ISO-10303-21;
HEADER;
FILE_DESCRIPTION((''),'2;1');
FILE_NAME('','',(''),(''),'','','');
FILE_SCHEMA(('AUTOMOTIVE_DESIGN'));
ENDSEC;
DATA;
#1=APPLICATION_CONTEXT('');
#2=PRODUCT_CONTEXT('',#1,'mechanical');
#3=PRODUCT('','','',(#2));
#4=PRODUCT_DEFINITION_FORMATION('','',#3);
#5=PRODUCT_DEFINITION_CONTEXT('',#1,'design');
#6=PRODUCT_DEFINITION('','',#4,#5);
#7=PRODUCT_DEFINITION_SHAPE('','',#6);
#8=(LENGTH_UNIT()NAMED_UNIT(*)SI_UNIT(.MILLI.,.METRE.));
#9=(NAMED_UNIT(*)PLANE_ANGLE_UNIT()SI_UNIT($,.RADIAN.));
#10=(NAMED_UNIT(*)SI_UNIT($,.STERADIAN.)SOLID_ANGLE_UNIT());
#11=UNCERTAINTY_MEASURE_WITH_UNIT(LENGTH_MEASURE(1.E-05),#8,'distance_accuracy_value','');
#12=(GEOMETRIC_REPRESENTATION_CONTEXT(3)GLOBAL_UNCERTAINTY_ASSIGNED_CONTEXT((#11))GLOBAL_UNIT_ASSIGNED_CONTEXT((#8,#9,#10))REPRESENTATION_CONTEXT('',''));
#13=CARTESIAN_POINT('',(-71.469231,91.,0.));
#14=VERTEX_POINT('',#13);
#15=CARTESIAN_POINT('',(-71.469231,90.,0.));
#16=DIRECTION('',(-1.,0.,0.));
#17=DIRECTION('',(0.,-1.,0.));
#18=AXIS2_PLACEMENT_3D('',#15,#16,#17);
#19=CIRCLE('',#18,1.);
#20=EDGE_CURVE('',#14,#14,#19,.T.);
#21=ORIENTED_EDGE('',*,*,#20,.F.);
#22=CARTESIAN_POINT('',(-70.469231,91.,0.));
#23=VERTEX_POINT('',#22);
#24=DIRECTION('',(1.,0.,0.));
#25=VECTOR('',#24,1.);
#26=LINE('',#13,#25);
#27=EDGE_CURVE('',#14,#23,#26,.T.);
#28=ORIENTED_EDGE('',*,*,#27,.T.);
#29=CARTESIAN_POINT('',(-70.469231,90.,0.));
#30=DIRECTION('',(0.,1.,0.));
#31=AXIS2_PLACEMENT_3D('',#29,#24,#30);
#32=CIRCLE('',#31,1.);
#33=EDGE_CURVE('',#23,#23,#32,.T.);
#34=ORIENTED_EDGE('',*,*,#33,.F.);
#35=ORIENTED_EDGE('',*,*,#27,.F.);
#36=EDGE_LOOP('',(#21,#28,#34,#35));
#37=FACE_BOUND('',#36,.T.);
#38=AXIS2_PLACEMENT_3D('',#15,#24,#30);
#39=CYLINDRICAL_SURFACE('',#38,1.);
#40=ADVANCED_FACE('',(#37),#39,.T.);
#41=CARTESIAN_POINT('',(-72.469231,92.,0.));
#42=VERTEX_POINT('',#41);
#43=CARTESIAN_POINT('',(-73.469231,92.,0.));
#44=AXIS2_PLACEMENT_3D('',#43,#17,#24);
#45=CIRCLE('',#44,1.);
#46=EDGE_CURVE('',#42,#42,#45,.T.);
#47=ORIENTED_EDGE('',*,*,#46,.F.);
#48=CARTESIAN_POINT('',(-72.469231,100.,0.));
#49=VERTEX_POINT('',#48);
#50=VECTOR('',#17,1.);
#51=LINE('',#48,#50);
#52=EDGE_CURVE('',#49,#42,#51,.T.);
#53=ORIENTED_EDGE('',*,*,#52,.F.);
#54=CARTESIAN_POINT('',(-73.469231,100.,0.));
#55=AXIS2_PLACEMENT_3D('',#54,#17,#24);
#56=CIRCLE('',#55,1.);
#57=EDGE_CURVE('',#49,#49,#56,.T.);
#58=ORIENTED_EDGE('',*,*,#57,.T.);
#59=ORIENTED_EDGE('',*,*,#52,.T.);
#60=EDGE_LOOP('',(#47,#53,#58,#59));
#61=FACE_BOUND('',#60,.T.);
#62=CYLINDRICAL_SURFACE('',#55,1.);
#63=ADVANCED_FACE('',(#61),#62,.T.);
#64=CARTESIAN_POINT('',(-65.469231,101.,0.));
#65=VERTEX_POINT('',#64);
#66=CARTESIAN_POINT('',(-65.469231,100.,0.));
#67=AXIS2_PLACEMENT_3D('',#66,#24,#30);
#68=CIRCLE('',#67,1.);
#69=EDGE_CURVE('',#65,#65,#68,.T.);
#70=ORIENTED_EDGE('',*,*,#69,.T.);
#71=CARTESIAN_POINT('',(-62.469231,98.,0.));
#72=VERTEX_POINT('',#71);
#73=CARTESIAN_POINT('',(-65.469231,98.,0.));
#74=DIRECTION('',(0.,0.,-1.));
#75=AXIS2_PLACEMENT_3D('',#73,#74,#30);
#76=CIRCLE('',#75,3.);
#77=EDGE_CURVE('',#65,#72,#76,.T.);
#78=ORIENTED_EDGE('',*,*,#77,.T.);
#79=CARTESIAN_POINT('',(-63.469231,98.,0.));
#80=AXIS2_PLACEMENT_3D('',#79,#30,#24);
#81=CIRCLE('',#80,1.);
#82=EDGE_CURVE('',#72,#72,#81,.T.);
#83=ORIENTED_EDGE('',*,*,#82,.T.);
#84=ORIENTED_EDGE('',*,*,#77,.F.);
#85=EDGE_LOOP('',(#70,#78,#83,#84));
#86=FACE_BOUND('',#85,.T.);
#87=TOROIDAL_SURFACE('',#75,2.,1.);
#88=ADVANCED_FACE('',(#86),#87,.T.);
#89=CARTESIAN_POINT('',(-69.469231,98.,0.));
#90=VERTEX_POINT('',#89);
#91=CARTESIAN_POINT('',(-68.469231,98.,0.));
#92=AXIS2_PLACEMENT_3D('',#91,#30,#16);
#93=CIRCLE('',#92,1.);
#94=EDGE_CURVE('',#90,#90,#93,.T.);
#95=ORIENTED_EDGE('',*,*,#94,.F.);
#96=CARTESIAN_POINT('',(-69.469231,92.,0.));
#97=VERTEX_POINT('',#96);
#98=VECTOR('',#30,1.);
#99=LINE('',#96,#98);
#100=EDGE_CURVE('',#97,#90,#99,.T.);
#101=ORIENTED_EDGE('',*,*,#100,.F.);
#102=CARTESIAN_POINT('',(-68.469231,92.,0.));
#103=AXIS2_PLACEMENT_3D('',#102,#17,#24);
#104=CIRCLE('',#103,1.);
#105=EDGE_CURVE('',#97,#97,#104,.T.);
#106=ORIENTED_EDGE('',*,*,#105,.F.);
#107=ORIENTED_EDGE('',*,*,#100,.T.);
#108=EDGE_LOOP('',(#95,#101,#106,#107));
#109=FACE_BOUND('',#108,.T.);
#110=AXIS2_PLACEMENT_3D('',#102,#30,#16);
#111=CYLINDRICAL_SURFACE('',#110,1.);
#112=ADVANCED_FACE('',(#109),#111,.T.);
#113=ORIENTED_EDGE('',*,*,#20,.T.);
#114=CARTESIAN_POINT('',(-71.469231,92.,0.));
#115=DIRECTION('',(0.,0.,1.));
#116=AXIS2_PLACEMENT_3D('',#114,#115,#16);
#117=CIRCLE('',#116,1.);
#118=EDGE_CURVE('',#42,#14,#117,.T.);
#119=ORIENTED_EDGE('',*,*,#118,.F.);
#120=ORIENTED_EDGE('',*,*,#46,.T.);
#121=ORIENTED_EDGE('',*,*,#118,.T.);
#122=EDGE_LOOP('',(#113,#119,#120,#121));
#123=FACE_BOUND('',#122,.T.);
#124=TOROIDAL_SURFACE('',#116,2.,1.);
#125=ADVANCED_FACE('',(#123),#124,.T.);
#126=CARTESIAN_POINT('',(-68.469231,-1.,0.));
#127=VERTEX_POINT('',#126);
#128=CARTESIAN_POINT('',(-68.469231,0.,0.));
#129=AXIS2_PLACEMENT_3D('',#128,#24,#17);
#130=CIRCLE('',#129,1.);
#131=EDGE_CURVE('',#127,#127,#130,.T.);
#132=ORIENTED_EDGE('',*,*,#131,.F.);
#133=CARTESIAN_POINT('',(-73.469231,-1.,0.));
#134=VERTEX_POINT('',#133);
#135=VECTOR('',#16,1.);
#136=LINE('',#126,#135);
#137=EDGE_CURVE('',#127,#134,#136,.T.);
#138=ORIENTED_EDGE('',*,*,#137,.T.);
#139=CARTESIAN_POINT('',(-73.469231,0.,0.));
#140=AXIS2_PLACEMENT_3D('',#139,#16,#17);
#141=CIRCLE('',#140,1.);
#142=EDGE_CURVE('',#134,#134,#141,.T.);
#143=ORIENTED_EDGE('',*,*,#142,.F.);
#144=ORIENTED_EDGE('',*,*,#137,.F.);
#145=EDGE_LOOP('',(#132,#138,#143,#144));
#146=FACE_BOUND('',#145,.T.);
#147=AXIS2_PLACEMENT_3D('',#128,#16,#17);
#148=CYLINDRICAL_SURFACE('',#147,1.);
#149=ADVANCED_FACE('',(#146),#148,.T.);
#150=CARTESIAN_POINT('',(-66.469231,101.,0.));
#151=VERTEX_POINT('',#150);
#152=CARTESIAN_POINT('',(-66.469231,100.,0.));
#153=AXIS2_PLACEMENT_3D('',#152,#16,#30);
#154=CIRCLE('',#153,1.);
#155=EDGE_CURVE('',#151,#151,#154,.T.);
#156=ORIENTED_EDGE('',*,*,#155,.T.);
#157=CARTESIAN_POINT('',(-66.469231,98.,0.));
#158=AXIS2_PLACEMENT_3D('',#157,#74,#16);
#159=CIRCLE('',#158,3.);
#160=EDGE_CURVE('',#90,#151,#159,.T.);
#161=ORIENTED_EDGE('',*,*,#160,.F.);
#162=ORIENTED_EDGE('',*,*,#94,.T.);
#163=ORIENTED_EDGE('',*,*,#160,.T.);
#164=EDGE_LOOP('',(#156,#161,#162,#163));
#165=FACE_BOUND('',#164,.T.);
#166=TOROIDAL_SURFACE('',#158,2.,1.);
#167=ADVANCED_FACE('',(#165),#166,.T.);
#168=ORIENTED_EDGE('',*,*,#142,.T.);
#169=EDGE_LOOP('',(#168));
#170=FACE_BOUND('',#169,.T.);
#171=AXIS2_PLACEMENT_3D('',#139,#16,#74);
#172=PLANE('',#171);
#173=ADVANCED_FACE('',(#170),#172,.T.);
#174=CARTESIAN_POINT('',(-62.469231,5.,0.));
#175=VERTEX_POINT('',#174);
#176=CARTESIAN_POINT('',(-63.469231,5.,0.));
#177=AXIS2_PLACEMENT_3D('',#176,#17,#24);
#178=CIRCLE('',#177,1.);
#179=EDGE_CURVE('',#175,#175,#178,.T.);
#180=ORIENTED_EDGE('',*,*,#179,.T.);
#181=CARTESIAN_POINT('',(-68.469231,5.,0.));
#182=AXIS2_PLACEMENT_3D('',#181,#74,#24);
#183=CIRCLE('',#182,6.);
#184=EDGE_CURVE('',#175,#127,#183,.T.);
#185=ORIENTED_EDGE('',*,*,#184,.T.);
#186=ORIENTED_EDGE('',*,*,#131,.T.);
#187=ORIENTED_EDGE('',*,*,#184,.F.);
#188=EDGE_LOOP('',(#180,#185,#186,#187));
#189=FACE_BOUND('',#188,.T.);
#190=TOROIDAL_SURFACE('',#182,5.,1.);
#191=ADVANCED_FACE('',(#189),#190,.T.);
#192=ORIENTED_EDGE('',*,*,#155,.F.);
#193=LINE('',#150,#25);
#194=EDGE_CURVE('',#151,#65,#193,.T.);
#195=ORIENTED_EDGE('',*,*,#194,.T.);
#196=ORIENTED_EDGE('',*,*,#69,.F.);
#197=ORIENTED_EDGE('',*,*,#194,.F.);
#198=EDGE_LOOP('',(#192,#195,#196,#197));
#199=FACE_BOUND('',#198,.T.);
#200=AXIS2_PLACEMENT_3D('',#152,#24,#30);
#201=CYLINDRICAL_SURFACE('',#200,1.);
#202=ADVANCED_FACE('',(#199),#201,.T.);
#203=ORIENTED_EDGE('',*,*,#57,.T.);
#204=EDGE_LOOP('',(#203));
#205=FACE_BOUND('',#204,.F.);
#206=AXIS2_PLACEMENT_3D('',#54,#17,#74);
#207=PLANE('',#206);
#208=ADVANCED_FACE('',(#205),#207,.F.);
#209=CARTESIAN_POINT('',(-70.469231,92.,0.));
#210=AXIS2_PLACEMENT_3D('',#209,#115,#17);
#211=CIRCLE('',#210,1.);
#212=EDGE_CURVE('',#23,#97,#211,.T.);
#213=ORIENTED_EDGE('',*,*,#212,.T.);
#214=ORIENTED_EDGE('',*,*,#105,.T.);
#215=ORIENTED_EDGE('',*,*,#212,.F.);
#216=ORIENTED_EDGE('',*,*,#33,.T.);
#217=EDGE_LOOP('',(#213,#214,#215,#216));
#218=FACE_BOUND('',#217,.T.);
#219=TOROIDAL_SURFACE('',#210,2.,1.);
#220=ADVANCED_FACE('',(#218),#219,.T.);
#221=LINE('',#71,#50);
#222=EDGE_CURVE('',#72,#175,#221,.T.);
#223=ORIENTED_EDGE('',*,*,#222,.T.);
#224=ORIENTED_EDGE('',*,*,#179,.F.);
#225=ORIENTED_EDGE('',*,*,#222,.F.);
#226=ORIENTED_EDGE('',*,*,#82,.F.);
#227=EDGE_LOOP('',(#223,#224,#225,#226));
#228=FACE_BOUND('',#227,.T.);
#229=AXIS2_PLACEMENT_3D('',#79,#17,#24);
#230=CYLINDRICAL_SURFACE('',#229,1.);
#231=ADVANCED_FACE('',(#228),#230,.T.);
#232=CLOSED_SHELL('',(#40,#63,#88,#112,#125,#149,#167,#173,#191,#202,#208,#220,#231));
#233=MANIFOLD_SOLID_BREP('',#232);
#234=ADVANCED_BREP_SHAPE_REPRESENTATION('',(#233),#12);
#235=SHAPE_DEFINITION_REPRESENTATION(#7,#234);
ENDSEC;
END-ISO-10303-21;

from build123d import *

# Parameters (mm, degrees)
F2_R = 1


# Not quite as in the source:
# - a feature names something its author has since deleted; it is built from what else it names


with BuildPart() as f3:
    # F3: sweep along a path in F0
    with BuildLine(Plane.XY) as f3_path:
        Line((-73.4692310878, 100), (-73.4692310878, 92))
        ThreePointArc((-73.4692310878, 92), (-72.8834446502, 90.5857864376), (-71.4692310878, 90))
        Line((-71.4692310878, 90), (-70.4692310878, 90))
        ThreePointArc((-70.4692310878, 90), (-69.0550175254, 90.5857864376), (-68.4692310878, 92))
        Line((-68.4692310878, 92), (-68.4692310878, 98))
        ThreePointArc((-68.4692310878, 98), (-67.8834446502, 99.4142135624), (-66.4692310878, 100))
        Line((-66.4692310878, 100), (-65.4692310878, 100))
        ThreePointArc((-65.4692310878, 100), (-64.0550175254, 99.4142135624), (-63.4692310878, 98))
        Line((-63.4692310878, 98), (-63.4692310878, 5))
        ThreePointArc((-63.4692310878, 5), (-64.9336971819, 1.4644660941), (-68.4692310878, 0))
        Line((-68.4692310878, 0), (-73.4692310878, 0))
    # F2 (on plane+point) → F3 (sweep)
    with BuildSketch(Plane.XZ.offset(-100)):
        with Locations((-73.4692310878, 0)):
            Circle(F2_R)
    sweep(path=f3_path.line)


solid = f3.part
